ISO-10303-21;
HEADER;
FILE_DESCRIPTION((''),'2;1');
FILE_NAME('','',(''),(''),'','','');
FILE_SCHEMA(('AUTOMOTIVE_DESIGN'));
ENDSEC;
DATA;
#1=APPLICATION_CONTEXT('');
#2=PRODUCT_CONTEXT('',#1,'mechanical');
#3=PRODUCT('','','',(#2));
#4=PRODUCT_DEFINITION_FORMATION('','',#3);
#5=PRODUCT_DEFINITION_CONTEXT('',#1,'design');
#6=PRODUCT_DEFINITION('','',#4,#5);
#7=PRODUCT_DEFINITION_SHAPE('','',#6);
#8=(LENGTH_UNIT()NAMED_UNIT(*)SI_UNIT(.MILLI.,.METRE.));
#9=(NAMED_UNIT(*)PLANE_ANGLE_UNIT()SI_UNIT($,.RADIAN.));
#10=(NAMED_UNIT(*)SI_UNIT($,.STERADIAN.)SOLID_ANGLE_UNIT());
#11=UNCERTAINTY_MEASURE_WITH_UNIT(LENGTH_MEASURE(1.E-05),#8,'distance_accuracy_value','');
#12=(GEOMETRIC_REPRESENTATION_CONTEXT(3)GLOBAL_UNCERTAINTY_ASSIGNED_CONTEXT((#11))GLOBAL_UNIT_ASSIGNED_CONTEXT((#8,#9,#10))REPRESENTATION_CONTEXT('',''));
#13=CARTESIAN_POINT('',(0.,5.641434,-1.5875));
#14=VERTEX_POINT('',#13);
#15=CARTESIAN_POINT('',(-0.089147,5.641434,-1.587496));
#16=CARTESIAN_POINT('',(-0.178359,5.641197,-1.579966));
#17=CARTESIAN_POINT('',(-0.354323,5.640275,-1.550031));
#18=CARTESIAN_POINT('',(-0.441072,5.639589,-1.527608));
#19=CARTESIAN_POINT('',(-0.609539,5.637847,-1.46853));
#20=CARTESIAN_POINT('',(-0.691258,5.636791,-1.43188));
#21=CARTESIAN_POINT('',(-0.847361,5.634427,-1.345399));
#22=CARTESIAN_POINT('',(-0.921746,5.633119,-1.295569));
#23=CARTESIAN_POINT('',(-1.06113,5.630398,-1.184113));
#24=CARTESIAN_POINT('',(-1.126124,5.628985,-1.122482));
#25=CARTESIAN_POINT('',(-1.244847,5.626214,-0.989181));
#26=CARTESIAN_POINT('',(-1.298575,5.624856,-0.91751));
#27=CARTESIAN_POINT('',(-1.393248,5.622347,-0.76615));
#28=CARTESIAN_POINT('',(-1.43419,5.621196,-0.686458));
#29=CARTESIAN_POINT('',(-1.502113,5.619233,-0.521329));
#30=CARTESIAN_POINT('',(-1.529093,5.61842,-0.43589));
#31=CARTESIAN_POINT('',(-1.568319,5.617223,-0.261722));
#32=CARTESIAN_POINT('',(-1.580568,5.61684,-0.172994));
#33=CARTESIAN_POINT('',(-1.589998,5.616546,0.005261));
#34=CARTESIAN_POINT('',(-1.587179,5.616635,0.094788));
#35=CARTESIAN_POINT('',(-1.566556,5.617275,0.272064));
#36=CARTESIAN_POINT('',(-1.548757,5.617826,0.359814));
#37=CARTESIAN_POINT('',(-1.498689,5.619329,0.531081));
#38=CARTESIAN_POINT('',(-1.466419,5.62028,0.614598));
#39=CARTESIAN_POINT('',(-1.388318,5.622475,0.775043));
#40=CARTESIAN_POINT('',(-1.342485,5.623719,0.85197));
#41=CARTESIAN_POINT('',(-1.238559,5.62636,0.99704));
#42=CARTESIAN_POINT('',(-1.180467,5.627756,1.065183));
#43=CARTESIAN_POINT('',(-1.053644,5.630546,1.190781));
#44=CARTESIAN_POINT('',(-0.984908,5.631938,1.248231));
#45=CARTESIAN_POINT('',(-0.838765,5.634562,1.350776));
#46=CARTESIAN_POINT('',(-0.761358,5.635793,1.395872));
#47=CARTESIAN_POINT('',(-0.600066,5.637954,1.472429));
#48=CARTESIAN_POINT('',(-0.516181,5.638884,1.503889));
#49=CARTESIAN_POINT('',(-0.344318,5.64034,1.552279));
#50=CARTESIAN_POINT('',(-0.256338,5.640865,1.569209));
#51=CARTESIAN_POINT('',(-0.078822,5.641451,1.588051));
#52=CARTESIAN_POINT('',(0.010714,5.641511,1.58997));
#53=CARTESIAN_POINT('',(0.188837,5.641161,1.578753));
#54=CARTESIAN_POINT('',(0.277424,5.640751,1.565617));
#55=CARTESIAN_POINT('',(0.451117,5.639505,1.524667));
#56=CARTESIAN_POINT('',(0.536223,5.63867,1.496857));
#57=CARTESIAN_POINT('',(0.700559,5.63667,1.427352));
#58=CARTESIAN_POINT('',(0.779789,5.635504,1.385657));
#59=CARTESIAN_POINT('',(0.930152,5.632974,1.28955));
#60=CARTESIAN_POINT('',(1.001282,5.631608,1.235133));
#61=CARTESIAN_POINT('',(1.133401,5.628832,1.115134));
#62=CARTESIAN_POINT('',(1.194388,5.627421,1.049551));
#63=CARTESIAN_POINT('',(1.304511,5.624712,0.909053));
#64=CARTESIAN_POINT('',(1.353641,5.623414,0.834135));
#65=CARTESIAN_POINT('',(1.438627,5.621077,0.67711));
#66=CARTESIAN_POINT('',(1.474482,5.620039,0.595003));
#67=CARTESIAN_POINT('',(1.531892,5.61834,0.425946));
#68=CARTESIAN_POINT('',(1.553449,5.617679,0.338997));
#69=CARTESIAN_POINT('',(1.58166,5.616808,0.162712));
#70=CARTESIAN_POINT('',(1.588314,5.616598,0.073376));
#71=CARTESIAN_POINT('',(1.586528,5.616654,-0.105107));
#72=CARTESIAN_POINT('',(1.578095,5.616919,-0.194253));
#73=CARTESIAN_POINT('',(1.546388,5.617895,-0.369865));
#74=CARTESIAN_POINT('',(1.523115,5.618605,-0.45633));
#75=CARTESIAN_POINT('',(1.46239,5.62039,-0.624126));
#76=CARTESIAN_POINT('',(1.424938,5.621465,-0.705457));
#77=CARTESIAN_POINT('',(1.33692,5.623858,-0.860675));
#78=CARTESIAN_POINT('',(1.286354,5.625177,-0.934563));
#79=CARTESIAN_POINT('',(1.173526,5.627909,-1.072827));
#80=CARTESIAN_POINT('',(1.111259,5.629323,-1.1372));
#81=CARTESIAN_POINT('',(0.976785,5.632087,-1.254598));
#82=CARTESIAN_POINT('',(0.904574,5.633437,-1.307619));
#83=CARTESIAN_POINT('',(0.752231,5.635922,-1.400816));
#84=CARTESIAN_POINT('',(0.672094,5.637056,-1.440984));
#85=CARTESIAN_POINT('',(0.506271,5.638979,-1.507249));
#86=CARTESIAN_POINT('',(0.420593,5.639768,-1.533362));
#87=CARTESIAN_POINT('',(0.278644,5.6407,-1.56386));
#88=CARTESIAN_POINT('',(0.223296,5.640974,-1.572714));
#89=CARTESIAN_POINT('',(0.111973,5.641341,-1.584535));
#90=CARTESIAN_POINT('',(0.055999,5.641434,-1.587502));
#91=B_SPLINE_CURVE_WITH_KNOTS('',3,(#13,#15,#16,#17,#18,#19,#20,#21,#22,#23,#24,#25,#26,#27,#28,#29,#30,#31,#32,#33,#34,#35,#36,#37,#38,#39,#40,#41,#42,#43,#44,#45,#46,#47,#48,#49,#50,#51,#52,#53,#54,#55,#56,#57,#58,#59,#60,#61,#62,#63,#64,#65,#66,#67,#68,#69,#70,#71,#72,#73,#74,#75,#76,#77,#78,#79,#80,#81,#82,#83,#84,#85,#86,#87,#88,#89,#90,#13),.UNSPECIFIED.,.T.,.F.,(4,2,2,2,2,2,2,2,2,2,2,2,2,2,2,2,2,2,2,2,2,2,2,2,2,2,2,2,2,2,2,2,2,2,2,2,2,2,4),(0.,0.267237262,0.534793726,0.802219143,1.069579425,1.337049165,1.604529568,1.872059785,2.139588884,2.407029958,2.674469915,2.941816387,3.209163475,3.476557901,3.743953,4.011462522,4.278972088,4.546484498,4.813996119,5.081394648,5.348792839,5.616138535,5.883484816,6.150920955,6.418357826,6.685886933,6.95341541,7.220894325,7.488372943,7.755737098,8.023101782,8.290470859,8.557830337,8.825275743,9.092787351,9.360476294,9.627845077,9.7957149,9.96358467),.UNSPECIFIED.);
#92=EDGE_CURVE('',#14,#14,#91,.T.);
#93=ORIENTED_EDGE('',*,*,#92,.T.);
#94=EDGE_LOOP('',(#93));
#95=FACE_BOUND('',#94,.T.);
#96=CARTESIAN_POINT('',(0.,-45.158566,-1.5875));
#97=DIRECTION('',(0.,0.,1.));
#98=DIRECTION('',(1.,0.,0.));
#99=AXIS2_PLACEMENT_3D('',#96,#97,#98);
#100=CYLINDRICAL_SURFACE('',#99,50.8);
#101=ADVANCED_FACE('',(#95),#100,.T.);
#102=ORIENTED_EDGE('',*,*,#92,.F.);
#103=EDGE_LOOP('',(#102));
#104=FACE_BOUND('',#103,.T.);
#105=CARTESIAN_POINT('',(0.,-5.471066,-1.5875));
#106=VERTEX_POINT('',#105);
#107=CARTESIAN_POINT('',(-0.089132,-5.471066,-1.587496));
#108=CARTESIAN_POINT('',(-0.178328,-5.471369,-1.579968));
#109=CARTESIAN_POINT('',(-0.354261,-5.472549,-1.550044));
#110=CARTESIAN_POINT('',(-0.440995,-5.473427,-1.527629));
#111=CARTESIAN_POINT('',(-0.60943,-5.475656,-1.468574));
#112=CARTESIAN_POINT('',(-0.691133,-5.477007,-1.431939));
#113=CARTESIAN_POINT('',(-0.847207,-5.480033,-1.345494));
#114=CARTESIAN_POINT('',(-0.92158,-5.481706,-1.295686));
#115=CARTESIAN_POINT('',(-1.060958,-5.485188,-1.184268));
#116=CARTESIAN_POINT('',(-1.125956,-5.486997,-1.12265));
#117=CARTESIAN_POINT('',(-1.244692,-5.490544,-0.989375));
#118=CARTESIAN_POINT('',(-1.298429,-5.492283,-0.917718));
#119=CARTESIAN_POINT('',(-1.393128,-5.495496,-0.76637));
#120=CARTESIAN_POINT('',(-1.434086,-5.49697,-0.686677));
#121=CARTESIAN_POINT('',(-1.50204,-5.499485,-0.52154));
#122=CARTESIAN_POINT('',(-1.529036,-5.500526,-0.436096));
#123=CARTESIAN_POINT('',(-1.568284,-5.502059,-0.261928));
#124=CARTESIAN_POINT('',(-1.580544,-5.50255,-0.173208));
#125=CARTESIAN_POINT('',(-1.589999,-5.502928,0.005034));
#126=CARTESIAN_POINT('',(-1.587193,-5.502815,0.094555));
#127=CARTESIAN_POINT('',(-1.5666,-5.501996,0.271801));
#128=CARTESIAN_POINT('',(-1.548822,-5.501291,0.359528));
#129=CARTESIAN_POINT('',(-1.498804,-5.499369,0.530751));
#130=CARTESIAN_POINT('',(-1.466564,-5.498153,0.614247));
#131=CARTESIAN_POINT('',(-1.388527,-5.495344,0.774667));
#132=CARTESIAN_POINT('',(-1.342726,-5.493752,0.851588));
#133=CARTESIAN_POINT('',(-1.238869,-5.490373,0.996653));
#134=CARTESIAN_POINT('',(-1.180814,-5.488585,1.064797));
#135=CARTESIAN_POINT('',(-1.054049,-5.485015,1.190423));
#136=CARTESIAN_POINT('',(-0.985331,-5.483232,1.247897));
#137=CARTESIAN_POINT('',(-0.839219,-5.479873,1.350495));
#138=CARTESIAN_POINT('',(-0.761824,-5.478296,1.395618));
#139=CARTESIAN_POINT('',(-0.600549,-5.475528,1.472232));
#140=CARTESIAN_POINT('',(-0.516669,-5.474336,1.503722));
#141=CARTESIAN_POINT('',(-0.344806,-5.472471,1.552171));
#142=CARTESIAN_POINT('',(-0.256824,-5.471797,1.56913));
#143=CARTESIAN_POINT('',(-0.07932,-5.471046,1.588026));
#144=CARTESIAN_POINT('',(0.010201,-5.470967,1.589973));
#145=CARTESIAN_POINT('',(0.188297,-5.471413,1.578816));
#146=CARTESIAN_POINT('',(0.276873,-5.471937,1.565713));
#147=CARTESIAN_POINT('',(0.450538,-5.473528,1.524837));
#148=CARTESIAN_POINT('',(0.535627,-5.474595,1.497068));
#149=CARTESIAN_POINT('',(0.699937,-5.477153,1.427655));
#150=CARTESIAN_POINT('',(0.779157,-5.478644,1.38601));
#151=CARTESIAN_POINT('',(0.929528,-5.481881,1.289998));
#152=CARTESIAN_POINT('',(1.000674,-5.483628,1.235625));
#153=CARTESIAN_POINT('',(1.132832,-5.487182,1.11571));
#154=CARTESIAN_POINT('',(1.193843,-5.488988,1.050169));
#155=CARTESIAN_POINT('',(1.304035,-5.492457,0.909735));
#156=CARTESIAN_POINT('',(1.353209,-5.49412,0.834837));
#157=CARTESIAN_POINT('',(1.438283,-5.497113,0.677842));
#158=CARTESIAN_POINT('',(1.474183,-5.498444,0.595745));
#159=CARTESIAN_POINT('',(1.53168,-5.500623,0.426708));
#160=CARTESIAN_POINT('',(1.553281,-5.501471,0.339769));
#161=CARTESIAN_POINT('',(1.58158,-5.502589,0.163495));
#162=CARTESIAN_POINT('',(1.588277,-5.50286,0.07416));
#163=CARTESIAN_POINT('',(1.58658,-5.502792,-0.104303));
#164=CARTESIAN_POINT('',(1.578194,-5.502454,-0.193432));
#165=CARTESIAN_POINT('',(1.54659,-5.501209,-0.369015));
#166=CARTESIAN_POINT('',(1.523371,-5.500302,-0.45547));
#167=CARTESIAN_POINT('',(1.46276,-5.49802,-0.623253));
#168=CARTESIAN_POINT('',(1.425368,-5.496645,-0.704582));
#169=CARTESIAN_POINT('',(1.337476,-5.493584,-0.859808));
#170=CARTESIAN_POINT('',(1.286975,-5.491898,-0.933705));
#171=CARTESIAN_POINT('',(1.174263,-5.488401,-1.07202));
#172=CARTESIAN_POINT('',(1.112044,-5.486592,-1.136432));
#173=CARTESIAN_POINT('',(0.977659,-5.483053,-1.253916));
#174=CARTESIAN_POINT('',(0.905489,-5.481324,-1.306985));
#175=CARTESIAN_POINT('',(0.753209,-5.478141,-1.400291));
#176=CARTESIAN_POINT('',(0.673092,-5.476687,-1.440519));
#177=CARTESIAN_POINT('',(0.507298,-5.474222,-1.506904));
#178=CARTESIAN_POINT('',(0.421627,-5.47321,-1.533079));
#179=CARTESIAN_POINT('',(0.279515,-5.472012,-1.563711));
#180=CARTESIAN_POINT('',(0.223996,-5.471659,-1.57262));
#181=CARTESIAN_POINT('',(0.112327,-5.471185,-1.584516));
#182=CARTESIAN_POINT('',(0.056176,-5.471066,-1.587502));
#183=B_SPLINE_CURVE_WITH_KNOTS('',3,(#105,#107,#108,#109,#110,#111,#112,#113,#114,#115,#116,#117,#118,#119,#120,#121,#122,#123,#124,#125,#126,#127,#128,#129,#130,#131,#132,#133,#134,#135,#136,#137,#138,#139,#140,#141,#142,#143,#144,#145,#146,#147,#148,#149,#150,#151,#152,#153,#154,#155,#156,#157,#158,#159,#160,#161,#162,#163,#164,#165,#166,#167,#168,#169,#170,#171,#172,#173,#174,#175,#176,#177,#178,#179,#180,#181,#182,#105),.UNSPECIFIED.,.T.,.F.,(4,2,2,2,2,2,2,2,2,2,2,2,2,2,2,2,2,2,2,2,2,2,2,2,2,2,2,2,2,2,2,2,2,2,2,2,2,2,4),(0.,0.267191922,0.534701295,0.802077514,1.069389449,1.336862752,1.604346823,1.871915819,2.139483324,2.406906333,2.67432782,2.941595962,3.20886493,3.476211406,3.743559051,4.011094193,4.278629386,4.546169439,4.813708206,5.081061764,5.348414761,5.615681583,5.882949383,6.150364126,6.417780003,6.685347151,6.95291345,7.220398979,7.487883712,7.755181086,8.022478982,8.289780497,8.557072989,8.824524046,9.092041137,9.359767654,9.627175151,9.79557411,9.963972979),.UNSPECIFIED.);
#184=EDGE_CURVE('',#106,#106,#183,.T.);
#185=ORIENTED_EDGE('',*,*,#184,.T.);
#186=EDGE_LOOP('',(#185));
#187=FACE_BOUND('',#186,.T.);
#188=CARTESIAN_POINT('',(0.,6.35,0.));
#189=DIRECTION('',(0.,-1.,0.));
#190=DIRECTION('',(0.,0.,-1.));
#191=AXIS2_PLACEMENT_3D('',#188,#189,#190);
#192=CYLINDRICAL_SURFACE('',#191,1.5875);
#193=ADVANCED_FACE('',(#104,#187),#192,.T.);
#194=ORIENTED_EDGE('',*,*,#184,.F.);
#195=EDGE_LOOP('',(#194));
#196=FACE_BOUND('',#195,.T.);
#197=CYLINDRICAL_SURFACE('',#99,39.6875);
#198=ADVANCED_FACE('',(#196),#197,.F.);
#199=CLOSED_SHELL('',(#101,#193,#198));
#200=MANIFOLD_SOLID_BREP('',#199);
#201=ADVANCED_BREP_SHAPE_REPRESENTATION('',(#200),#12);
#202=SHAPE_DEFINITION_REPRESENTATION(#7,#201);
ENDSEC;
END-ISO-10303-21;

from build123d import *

# Parameters (mm, degrees)
SKETCH1_R           = 1.5875
BOSS_EXTRUDE1_DEPTH = 6.35
CUT_EXTRUDE1_START  = -3
CUT_EXTRUDE1_DEPTH  = 6


with BuildPart() as part:
    # Sketch1 → Boss-Extrude1 (new, symmetric)
    with BuildSketch(Plane(origin=(0, 0, 0), x_dir=(1, 0, 0), z_dir=(0, 1, 0))):
        with Locations(Location((0, 0, 0), (0, 0, 270))):
            Circle(SKETCH1_R)
    extrude(amount=BOSS_EXTRUDE1_DEPTH, both=True)

    # Cut-Extrude1: read off the stored shape, not the designer's step
    # Cut-Extrude1 outline → Cut-Extrude1 (cut)
    with BuildSketch(Plane.XY.offset(CUT_EXTRUDE1_START)):
        with BuildLine():
            Line((3, -5.559377759), (1.587612861, -5.502832997))
            ThreePointArc((1.587612861, -5.502832997), (1.372e-06, -5.471065769), (-1.587610119, -5.502832888))
            Line((-1.587610119, -5.502832888), (-3, -5.559377663))
            Line((-3, -5.559377663), (-3, -6.35))
            Line((-3, -6.35), (3, -6.35))
            Line((3, -6.35), (3, -5.559377759))
        make_face()
        with BuildLine():
            Line((1.587612812, 5.616619958), (3, 5.572458151))
            Line((3, 5.572458151), (3, 6.35))
            Line((3, 6.35), (-3, 6.35))
            Line((-3, 6.35), (-3, 5.572458224))
            Line((-3, 5.572458224), (-1.587610131, 5.616620041))
            ThreePointArc((-1.587610131, 5.616620041), (1.341e-06, 5.641434231), (1.587612812, 5.616619958))
        make_face()
    extrude(amount=CUT_EXTRUDE1_DEPTH, mode=Mode.SUBTRACT)


solid = part.part
